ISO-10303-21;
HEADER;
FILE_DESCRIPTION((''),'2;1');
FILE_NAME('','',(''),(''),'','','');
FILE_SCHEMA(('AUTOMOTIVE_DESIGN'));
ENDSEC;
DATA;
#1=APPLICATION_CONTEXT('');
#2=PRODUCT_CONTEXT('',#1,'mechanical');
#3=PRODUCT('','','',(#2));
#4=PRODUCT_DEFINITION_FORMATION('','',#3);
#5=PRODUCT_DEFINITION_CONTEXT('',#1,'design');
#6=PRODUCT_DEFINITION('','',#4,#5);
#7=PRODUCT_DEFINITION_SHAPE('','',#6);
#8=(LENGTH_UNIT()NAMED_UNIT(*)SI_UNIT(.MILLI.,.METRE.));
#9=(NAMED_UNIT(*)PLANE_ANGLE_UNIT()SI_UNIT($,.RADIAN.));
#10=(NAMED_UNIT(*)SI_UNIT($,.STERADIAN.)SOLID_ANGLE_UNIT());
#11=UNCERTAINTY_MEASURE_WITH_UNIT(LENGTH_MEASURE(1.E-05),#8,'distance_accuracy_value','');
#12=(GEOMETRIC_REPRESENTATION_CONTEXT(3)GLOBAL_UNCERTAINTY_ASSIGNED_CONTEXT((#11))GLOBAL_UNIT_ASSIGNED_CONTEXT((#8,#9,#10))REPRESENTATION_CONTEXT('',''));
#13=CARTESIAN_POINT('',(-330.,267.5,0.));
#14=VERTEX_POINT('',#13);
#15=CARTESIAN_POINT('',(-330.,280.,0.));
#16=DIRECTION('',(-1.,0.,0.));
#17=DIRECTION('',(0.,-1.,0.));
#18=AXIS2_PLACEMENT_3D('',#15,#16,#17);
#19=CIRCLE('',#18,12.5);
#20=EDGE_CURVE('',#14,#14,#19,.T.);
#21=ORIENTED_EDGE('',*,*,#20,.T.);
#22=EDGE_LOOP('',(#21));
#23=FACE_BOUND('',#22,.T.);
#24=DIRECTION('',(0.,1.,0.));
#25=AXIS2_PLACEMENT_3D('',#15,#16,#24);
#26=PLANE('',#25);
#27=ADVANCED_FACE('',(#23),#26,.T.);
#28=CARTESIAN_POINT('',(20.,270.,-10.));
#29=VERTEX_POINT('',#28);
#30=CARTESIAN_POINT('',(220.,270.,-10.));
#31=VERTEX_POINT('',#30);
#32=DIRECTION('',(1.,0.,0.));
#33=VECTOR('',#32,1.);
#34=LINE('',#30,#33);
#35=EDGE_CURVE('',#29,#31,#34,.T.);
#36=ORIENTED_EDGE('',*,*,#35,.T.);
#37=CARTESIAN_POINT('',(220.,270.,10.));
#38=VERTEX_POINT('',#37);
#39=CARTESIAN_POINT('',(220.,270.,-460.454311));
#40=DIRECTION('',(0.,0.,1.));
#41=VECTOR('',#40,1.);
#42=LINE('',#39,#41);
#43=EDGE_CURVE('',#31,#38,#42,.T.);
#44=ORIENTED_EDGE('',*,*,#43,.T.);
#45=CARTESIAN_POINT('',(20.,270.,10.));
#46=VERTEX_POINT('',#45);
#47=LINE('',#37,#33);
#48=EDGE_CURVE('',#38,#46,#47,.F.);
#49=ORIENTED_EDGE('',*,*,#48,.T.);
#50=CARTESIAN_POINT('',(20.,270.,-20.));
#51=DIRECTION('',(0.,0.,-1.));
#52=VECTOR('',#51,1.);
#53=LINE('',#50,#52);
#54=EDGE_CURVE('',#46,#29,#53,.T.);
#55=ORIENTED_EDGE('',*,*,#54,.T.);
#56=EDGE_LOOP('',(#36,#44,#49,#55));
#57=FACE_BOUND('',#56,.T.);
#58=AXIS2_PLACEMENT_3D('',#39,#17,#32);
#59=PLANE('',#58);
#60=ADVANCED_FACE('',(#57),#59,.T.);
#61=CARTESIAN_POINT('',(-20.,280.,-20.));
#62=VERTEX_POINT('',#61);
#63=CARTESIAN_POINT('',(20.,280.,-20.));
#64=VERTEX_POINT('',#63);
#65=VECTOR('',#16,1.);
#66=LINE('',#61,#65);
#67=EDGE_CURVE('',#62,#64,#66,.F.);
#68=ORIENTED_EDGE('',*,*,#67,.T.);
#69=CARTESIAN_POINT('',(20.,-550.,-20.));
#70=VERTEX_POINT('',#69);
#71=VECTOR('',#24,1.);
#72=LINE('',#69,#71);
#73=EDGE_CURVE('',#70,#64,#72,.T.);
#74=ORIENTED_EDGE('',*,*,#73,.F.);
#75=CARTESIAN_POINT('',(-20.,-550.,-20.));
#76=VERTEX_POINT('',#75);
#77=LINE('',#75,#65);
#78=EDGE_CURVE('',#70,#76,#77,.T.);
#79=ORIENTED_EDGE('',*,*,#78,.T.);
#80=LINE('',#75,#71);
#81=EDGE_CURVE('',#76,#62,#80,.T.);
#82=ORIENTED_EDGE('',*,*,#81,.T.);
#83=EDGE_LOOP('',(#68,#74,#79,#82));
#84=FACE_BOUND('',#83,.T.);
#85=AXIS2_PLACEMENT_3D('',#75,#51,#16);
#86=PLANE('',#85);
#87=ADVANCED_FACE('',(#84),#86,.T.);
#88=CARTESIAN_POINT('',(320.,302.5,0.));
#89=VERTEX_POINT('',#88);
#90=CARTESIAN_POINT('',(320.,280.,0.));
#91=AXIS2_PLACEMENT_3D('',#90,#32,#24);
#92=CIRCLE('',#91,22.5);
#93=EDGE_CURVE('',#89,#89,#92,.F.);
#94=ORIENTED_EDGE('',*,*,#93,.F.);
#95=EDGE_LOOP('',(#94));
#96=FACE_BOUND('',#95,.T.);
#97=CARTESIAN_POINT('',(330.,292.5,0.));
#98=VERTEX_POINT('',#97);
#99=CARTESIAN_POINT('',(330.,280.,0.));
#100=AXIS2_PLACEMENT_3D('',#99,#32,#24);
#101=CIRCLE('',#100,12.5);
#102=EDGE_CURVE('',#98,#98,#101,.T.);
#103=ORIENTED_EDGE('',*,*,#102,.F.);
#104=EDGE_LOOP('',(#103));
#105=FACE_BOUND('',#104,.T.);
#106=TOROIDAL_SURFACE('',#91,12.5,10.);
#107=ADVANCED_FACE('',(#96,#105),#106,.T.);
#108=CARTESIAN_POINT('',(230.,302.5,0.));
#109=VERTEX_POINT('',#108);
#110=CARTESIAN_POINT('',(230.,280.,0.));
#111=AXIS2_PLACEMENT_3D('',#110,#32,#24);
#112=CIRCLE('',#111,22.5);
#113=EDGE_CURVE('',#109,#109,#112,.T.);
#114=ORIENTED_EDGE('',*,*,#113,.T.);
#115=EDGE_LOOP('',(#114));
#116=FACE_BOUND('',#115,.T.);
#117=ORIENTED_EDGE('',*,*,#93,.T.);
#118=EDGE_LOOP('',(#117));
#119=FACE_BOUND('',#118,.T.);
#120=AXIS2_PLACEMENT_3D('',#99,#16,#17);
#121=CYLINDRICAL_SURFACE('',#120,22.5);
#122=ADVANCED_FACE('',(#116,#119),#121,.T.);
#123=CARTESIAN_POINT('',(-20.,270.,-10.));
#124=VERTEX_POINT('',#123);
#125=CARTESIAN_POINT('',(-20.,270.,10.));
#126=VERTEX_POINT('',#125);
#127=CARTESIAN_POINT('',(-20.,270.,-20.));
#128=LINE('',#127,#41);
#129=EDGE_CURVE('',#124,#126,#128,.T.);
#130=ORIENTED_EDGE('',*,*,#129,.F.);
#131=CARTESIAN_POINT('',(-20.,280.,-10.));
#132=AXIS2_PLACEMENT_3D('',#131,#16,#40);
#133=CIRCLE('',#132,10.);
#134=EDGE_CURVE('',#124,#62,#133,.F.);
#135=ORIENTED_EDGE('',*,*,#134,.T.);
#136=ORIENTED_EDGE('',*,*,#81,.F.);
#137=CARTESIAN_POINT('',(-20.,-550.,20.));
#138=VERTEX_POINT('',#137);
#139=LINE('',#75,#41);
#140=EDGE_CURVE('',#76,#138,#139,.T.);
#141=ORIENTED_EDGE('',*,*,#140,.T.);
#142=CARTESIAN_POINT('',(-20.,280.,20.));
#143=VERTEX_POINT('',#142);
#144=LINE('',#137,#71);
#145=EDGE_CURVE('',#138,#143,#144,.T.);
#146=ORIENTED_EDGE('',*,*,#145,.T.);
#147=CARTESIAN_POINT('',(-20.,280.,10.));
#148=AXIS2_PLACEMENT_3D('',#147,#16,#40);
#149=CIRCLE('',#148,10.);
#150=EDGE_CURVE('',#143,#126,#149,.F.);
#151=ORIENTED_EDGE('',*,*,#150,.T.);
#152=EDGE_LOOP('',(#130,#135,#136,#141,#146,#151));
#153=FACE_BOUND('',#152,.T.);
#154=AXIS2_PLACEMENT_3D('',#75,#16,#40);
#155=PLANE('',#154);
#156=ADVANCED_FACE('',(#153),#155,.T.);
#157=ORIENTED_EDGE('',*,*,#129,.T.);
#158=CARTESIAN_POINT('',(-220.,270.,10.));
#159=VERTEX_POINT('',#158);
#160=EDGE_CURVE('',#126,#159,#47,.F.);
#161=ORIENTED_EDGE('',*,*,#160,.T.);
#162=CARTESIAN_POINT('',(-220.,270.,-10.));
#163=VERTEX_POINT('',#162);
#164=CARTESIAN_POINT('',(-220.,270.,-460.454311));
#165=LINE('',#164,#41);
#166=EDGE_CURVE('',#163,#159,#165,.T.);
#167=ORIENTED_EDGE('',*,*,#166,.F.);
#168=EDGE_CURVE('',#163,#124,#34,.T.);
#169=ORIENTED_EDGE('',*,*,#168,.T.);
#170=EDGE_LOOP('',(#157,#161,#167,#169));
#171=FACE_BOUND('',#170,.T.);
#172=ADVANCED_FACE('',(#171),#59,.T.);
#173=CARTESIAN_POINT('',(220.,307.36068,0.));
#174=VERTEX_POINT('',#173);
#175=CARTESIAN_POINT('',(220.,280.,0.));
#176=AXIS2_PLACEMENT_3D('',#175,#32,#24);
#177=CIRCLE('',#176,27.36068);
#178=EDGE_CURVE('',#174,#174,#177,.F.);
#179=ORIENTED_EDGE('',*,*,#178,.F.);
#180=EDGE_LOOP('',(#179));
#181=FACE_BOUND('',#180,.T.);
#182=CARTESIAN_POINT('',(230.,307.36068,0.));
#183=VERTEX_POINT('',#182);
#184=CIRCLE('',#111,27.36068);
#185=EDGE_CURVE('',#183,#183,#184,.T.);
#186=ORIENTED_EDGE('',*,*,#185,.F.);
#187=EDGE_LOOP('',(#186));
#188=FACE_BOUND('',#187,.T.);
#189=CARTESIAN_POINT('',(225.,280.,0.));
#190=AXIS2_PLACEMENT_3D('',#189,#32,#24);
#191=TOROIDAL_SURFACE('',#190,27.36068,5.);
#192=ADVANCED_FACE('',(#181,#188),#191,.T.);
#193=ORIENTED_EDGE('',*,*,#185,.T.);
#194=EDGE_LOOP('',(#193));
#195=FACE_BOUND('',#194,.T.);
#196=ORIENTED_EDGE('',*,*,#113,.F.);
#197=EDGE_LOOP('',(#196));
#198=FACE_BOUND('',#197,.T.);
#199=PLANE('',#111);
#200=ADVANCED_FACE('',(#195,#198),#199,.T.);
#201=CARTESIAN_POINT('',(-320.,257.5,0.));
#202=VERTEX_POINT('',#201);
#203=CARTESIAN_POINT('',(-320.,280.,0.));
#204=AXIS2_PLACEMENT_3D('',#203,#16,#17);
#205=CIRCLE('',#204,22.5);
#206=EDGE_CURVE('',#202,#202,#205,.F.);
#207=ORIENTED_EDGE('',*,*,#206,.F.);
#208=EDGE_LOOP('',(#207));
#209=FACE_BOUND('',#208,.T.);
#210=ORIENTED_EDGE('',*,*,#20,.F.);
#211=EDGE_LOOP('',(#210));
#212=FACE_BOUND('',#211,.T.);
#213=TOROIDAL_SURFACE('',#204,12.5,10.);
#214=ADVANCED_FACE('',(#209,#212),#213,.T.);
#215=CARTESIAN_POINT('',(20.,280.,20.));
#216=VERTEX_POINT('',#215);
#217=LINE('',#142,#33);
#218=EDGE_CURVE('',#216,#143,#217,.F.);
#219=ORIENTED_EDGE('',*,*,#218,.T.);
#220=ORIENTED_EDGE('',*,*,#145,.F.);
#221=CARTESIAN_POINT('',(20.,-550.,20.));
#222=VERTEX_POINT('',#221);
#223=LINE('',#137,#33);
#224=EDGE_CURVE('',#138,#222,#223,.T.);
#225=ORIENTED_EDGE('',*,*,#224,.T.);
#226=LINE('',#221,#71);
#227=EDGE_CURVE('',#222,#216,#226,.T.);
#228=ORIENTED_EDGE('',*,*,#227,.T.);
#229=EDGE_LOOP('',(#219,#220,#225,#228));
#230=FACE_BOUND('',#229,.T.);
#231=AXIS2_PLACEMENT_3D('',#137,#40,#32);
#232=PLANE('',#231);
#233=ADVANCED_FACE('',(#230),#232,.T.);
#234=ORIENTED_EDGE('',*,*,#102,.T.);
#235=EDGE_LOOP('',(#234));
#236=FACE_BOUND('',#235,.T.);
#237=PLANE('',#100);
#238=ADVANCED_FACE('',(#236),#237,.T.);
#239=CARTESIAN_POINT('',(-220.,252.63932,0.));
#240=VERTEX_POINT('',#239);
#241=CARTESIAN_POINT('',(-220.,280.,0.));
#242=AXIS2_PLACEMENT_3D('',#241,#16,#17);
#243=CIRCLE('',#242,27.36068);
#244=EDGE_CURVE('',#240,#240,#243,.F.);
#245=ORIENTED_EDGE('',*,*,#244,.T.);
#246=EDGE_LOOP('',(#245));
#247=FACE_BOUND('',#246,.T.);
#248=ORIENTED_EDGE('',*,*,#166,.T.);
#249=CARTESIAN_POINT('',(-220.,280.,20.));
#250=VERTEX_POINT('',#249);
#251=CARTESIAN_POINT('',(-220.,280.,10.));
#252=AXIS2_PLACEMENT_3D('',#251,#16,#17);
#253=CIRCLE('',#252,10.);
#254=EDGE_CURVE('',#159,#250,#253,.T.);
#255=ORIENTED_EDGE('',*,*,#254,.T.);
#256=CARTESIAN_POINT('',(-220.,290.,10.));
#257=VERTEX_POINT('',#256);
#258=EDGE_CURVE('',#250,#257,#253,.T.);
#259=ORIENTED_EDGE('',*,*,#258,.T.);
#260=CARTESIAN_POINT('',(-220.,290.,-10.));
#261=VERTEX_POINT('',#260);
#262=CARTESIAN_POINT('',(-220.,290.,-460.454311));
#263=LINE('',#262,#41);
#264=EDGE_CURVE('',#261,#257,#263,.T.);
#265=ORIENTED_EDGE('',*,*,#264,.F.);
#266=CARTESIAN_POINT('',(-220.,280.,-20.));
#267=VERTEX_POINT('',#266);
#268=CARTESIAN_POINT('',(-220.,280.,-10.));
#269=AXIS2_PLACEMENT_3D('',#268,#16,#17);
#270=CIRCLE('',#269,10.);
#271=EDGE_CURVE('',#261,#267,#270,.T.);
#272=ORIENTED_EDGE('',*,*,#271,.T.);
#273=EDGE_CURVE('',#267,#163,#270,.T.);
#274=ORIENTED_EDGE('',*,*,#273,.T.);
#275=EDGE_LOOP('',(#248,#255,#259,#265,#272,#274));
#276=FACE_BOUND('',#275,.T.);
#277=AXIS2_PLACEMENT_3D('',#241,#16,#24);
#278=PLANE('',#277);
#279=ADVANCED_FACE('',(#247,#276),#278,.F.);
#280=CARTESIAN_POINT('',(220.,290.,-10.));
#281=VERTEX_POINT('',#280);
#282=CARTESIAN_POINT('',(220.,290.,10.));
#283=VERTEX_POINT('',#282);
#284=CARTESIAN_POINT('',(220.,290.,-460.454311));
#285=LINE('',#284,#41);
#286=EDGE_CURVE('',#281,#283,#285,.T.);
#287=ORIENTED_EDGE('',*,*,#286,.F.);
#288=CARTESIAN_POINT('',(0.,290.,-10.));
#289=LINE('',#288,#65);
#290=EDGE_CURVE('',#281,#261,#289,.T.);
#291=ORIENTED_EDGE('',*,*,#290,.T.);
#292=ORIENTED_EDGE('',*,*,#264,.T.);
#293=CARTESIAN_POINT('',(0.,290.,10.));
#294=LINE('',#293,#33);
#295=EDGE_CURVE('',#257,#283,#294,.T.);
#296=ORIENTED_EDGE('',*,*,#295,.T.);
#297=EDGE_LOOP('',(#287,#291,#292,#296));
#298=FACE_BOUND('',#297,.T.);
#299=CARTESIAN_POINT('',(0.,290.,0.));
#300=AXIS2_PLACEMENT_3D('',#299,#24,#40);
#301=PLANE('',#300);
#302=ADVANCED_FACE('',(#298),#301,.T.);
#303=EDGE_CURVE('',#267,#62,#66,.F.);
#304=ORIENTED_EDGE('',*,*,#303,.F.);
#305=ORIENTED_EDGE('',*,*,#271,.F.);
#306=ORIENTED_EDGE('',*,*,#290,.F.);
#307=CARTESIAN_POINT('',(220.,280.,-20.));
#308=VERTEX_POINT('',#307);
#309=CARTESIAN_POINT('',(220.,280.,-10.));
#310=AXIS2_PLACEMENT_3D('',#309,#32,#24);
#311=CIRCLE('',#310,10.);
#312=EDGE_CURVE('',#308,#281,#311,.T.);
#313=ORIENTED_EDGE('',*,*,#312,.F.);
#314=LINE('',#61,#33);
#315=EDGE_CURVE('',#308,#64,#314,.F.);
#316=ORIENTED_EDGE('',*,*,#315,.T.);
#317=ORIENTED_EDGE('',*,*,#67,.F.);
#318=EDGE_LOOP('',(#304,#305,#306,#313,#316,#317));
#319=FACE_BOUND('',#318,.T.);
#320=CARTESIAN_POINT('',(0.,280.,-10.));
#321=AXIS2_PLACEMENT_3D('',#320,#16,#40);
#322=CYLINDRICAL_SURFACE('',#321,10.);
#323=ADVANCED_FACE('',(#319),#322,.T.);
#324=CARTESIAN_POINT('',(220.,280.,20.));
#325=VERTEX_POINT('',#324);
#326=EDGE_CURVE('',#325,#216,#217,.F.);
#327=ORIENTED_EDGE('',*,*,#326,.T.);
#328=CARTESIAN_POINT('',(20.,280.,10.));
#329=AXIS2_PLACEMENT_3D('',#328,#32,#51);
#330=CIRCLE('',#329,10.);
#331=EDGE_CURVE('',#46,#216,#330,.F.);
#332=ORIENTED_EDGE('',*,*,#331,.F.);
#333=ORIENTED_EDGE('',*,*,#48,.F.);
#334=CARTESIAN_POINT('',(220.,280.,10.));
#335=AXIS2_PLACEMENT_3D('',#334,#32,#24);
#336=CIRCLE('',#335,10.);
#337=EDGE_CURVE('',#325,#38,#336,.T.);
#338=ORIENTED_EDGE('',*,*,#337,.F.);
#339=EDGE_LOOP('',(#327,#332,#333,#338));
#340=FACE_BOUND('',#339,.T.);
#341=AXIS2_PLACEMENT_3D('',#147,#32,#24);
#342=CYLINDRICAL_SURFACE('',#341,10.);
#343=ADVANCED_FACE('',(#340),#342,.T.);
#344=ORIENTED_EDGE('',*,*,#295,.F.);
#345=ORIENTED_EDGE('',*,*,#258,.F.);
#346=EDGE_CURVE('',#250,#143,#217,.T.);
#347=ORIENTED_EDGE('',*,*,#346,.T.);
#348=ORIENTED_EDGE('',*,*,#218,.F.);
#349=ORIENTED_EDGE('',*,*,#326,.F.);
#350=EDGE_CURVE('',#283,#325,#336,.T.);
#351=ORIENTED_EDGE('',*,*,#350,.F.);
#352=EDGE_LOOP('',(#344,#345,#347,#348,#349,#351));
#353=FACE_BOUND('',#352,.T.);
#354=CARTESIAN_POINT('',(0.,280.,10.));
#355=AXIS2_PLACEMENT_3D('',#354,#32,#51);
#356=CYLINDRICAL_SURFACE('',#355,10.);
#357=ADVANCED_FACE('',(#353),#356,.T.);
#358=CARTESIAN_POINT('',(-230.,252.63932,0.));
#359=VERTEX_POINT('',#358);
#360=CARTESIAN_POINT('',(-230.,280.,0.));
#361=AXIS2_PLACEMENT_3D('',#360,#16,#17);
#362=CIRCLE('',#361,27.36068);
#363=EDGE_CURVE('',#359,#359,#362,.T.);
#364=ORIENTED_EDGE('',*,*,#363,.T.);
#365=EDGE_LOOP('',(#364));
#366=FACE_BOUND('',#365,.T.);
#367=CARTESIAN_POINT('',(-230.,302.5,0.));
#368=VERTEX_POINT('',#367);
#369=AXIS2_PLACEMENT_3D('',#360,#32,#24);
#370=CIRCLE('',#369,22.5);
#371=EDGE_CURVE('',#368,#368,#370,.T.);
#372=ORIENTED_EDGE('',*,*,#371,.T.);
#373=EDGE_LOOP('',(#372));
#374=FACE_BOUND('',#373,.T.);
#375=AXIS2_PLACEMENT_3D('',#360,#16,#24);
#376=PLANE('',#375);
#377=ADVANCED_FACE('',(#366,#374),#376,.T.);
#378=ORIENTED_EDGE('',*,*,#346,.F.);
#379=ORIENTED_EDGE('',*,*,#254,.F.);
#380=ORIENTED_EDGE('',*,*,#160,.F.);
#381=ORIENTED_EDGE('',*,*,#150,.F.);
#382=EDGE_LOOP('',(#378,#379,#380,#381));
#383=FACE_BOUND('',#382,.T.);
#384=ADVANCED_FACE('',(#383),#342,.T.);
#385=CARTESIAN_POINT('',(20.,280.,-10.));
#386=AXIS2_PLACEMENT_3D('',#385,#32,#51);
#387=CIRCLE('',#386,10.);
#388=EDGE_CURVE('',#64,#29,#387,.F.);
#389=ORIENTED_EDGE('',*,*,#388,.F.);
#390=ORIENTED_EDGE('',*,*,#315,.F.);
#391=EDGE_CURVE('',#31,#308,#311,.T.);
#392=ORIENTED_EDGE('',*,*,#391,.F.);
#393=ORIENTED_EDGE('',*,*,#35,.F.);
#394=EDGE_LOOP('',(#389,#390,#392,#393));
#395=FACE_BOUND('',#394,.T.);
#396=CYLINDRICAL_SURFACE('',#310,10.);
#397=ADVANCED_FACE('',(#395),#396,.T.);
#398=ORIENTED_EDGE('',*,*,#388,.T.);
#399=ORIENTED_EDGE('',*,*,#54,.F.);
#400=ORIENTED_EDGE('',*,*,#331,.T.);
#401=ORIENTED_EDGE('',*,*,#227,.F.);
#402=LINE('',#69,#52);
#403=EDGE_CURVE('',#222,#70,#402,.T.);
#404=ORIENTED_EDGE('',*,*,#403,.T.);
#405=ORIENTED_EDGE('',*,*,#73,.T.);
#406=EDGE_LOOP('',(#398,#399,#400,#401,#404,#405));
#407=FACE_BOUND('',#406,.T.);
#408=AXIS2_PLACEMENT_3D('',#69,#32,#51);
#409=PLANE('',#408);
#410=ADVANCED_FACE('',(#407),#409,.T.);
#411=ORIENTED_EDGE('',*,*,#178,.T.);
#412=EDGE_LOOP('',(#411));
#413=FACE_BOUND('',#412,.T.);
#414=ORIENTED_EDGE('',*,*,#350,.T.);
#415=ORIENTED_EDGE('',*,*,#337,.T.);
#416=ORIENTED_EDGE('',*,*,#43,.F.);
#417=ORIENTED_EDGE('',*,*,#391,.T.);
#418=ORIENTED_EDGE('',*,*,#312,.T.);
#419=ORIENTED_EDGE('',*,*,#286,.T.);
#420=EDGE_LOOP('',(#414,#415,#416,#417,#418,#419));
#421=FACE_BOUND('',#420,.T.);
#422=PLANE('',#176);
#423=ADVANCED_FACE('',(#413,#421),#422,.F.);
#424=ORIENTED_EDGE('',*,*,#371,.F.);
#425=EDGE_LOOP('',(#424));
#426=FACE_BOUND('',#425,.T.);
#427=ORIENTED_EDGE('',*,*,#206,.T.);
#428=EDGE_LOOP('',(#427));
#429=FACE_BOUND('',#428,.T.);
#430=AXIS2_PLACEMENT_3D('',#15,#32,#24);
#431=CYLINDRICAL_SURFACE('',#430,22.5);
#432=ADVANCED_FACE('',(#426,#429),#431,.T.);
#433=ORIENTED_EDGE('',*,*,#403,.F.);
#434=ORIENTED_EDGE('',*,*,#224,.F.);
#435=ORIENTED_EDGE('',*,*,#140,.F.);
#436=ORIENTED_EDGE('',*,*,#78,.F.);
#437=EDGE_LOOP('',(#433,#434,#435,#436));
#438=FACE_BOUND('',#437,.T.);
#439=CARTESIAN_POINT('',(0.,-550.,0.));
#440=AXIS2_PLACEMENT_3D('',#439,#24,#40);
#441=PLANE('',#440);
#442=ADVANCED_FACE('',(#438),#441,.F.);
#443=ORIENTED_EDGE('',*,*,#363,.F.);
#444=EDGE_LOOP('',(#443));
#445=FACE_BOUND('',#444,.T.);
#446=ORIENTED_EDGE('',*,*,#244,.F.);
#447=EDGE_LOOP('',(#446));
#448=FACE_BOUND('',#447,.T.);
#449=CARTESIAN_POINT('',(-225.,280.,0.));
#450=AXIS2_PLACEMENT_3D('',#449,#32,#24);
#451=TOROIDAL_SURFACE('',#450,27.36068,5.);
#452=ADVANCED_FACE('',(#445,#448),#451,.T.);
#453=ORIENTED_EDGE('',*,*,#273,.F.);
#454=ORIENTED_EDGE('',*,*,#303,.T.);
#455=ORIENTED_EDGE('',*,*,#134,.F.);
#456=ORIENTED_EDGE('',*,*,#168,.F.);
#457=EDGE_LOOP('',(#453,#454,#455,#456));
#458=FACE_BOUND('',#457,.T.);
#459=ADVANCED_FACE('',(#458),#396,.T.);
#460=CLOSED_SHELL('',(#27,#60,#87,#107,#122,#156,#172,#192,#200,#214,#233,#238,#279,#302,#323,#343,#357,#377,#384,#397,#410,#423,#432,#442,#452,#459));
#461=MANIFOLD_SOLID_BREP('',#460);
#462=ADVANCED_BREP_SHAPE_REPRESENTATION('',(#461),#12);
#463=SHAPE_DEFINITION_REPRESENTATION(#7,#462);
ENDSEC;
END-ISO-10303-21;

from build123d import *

# Parameters (mm, degrees)
BOSS_EXTRUDE1_DEPTH      = 290
BOSS_EXTRUDE1_DEPTH_BACK = 550
SKETCH1_W                = 40
SKETCH1_H                = 40
BOSS_EXTRUDE2_DEPTH      = 40
SKETCH3_R                = 32.360679775
BOSS_EXTRUDE3_DEPTH      = 10
SKETCH4_R                = 22.5
BOSS_EXTRUDE4_DEPTH      = 100
FILLET1_R                = 10
FILLET2_R                = 5
FILLET3_R                = 5
FILLET4_R                = 10


with BuildPart() as part:
    # Sketch1 → Boss-Extrude1 (new, two sides: drawn at the far end of the back side and taken through both)
    with BuildSketch(Plane(origin=(0, 0, 0), x_dir=(1, 0, 0), z_dir=(0, 1, 0)).offset(-BOSS_EXTRUDE1_DEPTH_BACK)):
        Rectangle(SKETCH1_W, SKETCH1_H)
    extrude(amount=BOSS_EXTRUDE1_DEPTH + BOSS_EXTRUDE1_DEPTH_BACK)

    # Sketch2 → Boss-Extrude2 (add)
    with BuildSketch(Plane.XY.offset(20)):
        Polygon((20, 290), (220, 290), (220, 270), (-220, 270), (-220, 290), (-20, 290), align=None)
    extrude(amount=-BOSS_EXTRUDE2_DEPTH)

    # Sketch3 → Boss-Extrude3 (add)
    with BuildSketch(Plane(origin=(220, 0, 0), x_dir=(0, 0, -1), z_dir=(1, 0, 0))):
        with Locations(Location((0, 280, 0), (0, 0, 90))):
            Circle(SKETCH3_R)
    boss_extrude3 = extrude(amount=BOSS_EXTRUDE3_DEPTH)

    # Sketch4 → Boss-Extrude4 (add)
    with BuildSketch(Plane(origin=(230, 0, 0), x_dir=(0, 0, -1), z_dir=(1, 0, 0))):
        with Locations(Location((0, 280, 0), (0, 0, 90))):
            Circle(SKETCH4_R)
    boss_extrude4 = extrude(amount=BOSS_EXTRUDE4_DEPTH)

    # Mirror1: Boss-Extrude3, Boss-Extrude4 across plane
    add(boss_extrude3.mirror(Plane(origin=(0, 0, 0), x_dir=(0, 0, 1), z_dir=(1, 0, 0))))
    add(boss_extrude4.mirror(Plane(origin=(0, 0, 0), x_dir=(0, 0, 1), z_dir=(1, 0, 0))))

    # Fillet1
    fillet1_edges = [part.edges().sort_by_distance(p)[0] for p in [
        (-120, 270, 20),
        (-120, 270, -20),
        (120, 270, 20),
        (120, 270, -20),
        (0, 290, -20),
        (0, 290, 20),
    ]]
    fillet(fillet1_edges, radius=FILLET1_R - 0.0001)  # a hair under: the kernel refuses the full size

    # Fillet2
    fillet2_edges = [part.edges().sort_by_distance(p)[0] for p in [
        (220, 247.639320225, 0),
        (230, 247.639320225, 0),
    ]]
    fillet(fillet2_edges, radius=FILLET2_R - 0.0001)  # a hair under: the kernel refuses the full size

    # Fillet3
    fillet3_edges = [part.edges().sort_by_distance(p)[0] for p in [
        (-230, 247.639320225, 0),
        (-220, 247.639320225, 0),
    ]]
    fillet(fillet3_edges, radius=FILLET3_R - 0.0001)  # a hair under: the kernel refuses the full size

    # Fillet4
    fillet4_edges = [part.edges().sort_by_distance(p)[0] for p in [
        (330, 257.5, 0),
        (-330, 257.5, 0),
    ]]
    fillet(fillet4_edges, radius=FILLET4_R)


solid = part.part
